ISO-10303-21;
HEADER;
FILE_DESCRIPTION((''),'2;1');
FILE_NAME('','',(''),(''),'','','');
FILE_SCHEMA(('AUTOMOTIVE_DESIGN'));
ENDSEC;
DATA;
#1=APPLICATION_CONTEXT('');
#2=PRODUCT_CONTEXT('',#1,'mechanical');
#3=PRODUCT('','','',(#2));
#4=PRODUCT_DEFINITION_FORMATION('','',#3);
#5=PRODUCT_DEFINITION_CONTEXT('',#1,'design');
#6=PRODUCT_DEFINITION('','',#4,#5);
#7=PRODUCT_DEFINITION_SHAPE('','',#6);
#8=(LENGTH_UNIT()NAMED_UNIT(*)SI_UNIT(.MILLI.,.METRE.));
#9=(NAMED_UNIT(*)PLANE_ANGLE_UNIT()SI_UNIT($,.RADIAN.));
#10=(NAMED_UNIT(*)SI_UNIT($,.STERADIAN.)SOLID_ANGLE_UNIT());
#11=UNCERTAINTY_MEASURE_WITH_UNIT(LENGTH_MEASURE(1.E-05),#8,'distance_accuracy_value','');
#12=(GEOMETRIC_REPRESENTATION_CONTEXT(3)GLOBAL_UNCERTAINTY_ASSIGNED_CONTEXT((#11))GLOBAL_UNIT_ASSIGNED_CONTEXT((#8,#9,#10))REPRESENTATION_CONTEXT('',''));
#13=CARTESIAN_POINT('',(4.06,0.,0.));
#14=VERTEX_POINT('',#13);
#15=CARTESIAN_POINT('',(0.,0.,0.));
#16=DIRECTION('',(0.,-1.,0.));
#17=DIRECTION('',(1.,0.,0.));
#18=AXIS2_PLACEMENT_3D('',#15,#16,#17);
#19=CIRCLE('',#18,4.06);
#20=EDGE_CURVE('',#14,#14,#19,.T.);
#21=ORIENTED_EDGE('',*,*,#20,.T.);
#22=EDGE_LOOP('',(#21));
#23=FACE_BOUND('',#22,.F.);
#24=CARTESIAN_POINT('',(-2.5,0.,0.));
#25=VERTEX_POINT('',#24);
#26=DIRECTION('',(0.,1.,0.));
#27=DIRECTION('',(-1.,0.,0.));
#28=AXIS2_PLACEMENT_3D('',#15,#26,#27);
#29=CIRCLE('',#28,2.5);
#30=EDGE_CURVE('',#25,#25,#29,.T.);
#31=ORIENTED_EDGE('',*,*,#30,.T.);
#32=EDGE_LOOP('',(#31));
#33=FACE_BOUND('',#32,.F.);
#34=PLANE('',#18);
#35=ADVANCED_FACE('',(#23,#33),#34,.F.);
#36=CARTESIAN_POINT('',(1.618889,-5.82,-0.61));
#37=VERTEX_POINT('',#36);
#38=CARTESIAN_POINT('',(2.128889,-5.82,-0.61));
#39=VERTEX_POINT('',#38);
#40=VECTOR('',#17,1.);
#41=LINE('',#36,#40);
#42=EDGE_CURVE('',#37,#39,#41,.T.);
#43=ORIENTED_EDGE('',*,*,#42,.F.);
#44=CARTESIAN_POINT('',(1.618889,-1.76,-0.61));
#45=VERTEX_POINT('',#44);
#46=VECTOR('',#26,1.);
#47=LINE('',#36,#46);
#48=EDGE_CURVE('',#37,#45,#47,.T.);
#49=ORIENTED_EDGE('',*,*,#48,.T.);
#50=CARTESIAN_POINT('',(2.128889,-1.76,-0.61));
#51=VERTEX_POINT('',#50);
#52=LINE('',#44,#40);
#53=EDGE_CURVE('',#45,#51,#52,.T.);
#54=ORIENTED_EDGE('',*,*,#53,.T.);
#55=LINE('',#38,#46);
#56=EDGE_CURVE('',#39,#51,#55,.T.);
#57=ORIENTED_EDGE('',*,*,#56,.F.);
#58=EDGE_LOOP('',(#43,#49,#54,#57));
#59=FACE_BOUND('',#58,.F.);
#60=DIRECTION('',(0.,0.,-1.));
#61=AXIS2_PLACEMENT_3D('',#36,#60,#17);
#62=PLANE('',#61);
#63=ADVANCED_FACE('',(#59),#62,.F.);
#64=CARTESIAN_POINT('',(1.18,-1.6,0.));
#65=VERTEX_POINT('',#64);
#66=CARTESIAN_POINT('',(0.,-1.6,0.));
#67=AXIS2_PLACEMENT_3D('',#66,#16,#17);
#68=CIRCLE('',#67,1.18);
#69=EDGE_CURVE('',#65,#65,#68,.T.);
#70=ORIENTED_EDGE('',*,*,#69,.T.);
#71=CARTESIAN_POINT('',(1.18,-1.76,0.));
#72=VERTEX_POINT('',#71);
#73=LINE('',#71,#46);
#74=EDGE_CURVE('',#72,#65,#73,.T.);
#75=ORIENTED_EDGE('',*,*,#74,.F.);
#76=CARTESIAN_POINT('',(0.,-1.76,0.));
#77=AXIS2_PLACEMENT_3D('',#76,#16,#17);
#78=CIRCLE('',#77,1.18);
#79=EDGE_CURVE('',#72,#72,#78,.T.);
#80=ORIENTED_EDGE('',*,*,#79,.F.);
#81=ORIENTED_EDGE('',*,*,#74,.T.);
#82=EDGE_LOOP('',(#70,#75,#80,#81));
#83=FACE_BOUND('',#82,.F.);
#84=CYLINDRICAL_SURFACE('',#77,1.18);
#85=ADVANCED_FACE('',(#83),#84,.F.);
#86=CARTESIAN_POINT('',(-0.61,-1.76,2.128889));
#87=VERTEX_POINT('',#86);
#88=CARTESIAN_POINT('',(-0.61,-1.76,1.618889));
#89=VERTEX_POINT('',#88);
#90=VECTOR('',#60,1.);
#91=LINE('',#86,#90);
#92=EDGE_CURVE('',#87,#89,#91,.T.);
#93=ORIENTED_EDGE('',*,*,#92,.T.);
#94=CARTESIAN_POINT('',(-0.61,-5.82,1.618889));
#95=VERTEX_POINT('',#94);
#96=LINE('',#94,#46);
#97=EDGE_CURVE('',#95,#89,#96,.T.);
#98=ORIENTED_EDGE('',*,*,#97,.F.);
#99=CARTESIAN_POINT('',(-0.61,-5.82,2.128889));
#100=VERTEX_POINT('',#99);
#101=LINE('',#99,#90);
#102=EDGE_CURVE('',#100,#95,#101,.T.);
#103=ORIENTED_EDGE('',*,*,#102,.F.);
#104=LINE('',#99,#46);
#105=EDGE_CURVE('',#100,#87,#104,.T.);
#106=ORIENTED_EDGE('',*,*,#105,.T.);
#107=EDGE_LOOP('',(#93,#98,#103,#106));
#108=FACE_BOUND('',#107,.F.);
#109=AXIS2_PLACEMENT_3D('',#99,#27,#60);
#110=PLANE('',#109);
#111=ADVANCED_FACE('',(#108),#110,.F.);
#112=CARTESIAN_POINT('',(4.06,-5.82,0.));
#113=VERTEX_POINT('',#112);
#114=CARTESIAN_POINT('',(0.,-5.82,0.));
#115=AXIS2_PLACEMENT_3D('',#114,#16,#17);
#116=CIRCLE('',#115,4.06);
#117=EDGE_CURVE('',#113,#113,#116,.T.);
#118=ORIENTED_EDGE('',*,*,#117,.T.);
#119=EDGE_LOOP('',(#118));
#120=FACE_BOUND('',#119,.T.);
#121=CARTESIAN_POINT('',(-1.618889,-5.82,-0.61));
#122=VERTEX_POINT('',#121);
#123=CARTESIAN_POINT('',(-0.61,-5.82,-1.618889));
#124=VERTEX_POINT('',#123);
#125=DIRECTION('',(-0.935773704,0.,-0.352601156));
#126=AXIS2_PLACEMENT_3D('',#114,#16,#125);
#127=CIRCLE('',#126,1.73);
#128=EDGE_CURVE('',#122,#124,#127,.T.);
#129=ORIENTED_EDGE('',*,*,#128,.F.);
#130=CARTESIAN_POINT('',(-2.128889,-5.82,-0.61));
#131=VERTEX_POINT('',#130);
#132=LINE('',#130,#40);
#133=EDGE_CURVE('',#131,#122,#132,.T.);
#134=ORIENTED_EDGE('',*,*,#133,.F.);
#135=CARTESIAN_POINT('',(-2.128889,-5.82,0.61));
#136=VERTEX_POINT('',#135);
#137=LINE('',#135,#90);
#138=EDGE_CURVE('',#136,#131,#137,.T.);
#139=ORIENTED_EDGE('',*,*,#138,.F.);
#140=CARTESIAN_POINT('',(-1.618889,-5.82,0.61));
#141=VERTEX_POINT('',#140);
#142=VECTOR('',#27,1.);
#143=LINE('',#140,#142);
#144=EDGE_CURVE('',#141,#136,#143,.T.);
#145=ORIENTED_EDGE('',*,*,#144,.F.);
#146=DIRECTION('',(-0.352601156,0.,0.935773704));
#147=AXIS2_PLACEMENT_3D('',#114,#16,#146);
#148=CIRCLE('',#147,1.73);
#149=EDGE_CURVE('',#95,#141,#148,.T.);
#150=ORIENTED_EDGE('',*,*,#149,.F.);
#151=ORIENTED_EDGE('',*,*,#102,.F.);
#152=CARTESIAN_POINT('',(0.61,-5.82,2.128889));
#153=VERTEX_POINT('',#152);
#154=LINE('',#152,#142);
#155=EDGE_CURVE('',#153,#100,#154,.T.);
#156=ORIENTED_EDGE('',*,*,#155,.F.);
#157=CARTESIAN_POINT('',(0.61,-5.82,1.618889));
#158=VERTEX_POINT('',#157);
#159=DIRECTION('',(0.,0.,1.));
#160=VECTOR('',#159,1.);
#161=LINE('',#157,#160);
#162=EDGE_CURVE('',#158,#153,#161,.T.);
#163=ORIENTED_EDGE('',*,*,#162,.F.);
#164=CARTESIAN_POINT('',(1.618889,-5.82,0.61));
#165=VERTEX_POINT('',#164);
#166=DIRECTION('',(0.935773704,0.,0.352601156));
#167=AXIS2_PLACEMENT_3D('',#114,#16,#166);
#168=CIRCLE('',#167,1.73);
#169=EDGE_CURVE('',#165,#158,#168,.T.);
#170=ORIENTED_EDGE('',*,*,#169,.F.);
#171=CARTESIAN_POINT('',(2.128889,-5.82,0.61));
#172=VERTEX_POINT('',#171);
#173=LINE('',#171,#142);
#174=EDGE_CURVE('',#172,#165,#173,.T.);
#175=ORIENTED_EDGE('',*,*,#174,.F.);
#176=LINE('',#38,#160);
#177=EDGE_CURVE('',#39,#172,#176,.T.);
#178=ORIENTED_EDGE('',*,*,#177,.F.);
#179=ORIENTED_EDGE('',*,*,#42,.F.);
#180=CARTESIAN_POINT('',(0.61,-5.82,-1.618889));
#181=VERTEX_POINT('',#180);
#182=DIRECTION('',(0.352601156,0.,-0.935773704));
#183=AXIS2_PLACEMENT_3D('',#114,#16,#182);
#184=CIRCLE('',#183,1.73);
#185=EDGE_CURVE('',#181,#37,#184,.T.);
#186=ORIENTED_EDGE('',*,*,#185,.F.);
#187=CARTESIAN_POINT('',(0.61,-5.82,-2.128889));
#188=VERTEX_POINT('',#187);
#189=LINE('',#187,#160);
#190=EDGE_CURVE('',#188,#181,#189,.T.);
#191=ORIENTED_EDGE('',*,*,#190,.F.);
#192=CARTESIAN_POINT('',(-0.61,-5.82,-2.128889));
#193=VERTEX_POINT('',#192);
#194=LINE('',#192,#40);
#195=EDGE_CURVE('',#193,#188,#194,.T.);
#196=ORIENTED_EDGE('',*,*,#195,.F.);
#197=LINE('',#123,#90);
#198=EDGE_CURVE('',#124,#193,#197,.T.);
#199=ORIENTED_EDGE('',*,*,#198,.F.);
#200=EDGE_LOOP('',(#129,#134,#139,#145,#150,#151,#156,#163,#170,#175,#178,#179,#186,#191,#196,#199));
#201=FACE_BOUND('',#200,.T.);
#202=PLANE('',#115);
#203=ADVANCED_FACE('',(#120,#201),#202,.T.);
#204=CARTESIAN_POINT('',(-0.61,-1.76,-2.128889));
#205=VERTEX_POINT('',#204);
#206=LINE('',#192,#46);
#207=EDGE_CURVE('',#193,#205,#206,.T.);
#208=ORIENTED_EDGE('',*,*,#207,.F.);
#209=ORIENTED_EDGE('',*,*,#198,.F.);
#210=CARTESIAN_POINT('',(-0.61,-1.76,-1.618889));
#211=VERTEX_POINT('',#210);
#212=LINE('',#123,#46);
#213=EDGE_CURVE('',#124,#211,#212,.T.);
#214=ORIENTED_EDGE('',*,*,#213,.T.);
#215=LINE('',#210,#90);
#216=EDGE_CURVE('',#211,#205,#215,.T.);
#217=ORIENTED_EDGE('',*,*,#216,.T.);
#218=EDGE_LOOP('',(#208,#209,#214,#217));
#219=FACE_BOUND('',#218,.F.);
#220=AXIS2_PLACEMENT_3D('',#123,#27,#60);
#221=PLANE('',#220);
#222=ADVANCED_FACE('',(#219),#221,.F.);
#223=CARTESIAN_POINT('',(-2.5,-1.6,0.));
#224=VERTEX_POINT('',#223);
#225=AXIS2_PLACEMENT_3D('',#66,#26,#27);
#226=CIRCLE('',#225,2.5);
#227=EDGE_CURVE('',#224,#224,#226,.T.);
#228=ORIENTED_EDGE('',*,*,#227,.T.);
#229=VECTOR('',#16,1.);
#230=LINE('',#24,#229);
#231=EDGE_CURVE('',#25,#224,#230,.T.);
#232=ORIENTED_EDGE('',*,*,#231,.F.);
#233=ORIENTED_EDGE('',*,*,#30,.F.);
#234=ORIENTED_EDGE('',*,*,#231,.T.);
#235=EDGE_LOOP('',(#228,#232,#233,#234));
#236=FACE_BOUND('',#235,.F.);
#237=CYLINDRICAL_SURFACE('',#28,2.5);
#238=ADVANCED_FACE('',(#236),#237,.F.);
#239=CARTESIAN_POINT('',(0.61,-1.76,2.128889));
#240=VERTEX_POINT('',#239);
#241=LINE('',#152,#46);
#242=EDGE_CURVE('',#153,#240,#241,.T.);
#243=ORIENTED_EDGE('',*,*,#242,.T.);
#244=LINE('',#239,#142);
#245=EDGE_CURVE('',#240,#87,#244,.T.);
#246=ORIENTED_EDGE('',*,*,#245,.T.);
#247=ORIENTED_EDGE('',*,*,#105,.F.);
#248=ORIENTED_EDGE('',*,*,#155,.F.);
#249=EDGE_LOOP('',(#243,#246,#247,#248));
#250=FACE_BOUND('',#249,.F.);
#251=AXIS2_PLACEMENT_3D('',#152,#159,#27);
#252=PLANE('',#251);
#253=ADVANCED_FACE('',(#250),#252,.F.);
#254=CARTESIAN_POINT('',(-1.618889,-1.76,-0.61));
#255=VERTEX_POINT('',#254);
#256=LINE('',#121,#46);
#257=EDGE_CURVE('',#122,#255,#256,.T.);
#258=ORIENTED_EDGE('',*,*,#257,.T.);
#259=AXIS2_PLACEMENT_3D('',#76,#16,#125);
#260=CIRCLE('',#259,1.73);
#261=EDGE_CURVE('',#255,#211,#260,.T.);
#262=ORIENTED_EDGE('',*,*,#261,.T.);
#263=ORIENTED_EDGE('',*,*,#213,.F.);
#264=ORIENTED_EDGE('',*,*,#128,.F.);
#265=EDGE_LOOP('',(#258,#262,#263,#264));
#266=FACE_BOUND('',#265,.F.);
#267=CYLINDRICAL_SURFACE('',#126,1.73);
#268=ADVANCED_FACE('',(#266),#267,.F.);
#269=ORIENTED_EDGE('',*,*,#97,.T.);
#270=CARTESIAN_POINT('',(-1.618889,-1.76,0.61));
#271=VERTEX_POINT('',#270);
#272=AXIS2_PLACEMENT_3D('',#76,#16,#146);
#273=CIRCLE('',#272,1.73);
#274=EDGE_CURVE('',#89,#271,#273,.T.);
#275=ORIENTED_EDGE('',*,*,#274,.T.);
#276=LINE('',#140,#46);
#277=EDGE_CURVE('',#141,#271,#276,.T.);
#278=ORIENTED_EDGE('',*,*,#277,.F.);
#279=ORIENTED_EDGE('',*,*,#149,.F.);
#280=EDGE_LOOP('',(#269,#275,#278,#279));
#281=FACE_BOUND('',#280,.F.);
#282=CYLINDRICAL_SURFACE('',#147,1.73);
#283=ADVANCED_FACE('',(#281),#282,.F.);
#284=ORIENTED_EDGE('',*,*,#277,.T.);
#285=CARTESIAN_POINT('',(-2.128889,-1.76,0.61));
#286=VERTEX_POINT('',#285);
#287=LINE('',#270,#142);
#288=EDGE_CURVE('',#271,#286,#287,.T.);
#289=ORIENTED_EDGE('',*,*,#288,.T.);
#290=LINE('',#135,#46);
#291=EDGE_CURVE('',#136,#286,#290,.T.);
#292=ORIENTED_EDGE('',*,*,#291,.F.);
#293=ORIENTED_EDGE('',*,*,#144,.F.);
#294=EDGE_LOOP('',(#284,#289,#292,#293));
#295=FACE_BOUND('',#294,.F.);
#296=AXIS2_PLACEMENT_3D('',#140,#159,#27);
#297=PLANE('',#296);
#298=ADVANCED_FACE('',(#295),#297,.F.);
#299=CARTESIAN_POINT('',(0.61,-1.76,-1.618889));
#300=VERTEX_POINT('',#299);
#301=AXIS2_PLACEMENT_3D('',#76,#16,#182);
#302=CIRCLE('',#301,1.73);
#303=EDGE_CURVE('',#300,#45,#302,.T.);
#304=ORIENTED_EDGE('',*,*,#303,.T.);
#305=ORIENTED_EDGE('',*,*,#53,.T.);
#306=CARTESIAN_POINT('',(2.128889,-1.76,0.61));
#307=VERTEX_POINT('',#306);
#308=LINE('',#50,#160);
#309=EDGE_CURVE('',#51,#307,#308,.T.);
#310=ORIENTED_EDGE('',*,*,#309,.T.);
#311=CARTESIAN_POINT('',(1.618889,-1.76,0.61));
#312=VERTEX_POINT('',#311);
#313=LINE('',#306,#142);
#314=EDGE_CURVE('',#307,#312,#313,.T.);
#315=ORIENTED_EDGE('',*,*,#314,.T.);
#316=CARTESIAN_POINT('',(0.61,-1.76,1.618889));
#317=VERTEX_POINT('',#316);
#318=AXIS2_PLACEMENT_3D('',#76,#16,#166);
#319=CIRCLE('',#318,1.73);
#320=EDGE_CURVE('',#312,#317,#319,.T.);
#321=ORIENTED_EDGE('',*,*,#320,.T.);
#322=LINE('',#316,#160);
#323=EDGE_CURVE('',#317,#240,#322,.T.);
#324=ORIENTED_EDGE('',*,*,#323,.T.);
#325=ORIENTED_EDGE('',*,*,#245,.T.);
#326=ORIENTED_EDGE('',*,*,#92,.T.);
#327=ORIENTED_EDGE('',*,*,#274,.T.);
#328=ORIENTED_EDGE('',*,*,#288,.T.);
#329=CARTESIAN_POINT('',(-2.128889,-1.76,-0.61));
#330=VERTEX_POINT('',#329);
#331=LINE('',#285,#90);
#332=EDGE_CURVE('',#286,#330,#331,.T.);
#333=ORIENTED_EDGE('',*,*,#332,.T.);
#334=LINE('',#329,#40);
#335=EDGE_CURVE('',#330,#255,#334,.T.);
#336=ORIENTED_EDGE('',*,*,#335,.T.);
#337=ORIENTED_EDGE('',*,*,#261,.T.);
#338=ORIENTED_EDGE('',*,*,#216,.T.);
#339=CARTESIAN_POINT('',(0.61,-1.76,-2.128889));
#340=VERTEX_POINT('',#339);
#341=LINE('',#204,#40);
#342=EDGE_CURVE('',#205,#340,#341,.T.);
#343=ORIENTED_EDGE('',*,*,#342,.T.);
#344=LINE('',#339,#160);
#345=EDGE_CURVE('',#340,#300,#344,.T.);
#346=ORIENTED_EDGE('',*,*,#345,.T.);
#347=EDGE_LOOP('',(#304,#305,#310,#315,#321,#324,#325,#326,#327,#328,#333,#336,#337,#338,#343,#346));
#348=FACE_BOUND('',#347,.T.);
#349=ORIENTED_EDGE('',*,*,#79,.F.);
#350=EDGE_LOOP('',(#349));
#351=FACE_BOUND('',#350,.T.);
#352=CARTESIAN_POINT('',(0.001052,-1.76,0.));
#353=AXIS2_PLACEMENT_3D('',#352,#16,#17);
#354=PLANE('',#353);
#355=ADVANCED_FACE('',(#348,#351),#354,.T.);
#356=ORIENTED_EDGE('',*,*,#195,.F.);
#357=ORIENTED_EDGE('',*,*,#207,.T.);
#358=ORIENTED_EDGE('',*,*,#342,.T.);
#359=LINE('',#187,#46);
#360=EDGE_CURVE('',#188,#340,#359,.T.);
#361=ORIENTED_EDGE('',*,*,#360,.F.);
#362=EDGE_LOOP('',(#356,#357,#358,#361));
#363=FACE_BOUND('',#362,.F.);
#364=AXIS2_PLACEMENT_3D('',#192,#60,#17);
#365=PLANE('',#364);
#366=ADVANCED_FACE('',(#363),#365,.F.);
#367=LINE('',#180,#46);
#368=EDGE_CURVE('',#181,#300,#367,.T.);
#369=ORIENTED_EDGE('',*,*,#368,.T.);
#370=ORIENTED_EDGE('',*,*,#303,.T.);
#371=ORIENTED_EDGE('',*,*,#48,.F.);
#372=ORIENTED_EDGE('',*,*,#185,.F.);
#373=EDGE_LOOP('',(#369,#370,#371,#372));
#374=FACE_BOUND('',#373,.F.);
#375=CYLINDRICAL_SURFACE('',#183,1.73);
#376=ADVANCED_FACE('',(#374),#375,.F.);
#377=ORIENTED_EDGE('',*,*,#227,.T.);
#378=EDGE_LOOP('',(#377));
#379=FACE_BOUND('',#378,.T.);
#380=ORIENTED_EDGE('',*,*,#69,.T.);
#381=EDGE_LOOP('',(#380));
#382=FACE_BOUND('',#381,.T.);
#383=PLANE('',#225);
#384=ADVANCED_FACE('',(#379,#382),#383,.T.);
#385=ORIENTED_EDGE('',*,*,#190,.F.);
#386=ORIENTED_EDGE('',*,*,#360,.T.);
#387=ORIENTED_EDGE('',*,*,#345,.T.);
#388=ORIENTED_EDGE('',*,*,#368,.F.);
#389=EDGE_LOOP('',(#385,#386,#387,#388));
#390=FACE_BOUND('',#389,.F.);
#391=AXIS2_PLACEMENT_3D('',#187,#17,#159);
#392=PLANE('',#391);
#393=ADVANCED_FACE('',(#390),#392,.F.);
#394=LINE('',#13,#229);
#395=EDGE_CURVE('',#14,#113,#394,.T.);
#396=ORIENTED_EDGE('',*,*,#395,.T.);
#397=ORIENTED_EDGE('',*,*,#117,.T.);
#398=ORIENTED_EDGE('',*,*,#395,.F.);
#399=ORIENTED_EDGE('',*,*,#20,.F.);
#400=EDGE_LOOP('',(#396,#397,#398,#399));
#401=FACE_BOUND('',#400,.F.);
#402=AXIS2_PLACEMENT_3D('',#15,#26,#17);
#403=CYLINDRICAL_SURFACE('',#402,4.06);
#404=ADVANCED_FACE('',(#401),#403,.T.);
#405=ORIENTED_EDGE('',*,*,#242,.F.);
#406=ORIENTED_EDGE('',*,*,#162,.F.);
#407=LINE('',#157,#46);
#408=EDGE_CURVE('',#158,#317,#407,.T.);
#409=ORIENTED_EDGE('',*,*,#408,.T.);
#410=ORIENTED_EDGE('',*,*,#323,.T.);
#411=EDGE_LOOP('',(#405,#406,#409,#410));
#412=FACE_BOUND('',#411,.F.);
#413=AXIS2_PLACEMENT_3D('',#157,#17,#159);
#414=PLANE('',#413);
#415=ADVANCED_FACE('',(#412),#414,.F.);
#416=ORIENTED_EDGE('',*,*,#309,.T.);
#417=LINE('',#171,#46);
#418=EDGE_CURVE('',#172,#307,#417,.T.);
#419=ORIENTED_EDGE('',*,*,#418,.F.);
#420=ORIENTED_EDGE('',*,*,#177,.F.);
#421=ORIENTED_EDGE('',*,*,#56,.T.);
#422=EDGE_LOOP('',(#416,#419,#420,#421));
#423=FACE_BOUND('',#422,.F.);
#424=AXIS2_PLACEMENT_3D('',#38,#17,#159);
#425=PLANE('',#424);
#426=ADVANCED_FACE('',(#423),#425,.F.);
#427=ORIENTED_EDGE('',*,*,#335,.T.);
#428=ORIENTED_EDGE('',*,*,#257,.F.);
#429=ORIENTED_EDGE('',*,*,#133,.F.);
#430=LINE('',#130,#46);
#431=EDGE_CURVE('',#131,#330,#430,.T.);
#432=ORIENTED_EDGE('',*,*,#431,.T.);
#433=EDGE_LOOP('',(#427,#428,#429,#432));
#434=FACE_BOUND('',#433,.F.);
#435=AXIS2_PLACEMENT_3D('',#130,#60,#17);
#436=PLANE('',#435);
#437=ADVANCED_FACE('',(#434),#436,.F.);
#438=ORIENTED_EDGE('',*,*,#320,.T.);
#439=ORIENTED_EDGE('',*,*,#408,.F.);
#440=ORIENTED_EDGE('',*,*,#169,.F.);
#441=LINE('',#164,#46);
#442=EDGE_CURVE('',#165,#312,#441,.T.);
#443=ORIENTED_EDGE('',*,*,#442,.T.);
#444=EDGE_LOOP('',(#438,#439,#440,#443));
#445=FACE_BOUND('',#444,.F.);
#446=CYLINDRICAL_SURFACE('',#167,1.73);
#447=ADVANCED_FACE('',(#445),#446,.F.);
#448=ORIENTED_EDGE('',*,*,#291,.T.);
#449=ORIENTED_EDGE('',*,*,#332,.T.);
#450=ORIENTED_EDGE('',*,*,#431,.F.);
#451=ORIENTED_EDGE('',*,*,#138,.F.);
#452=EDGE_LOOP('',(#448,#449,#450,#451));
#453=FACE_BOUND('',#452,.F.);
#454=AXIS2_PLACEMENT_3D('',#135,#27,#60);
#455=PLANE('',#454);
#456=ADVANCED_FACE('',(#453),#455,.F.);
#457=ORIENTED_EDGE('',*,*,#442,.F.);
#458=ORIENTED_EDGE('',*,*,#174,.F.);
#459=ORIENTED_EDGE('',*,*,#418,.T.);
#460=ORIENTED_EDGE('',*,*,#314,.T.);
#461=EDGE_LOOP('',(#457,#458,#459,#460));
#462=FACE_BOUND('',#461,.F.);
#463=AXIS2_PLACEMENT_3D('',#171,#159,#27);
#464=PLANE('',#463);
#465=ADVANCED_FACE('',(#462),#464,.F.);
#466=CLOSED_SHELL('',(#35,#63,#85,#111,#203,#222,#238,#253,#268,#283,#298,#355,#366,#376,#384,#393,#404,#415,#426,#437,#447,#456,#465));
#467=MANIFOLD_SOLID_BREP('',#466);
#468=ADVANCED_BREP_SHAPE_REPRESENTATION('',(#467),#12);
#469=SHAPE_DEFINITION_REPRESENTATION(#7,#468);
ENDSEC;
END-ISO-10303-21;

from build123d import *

# Parameters (mm, degrees)
F0_R     = 4.06
F1_DEPTH = 5.82
F3_DEPTH = 4.06
F4_R     = 1.18
F5_DEPTH = 25
F6_R     = 2.5
F6_R_2   = 1.18
F7_DEPTH = 1.6


# Not quite as in the source:
# - a feature names something its author has since deleted; it is built from what else it names


with BuildPart() as f1:
    # F0 (on Front) → F1 (new body)
    with BuildSketch(Plane.XZ):
        Circle(F0_R)
    extrude(amount=F1_DEPTH)

    # F2 (on face) → F3 (cut)
    with BuildSketch(Plane.XZ.offset(5.82)):
        with BuildLine():
            ThreePointArc((1.6188885076, -0.61), (1.7019954639, -0.3100184526), (1.73, 0))
            ThreePointArc((1.73, 0), (1.7019954639, 0.3100184526), (1.6188885076, 0.61))
            ThreePointArc((1.6188885076, 0.61), (1.2232947315, 1.2232947315), (0.61, 1.6188885076))
            ThreePointArc((0.61, 1.6188885076), (0, 1.73), (-0.61, 1.6188885076))
            ThreePointArc((-0.61, 1.6188885076), (-1.2232947315, 1.2232947315), (-1.6188885076, 0.61))
            ThreePointArc((-1.6188885076, 0.61), (-1.73, 0), (-1.6188885076, -0.61))
            ThreePointArc((-1.6188885076, -0.61), (-1.2232947315, -1.2232947315), (-0.61, -1.6188885076))
            ThreePointArc((-0.61, -1.6188885076), (0, -1.73), (0.61, -1.6188885076))
            ThreePointArc((0.61, -1.6188885076), (1.2232947315, -1.2232947315), (1.6188885076, -0.61))
        make_face()
        with BuildLine():
            ThreePointArc((1.6188885076, 0.61), (1.7019954639, 0.3100184526), (1.73, 0))
            ThreePointArc((1.73, 0), (1.7019954639, -0.3100184526), (1.6188885076, -0.61))
            Line((1.6188885076, -0.61), (2.1288885076, -0.61))
            Line((2.1288885076, -0.61), (2.1288885076, 0.61))
            Line((2.1288885076, 0.61), (1.6188885076, 0.61))
        make_face()
        with BuildLine():
            ThreePointArc((-0.61, 1.6188885076), (0, 1.73), (0.61, 1.6188885076))
            Line((0.61, 1.6188885076), (0.61, 2.1288885076))
            Line((0.61, 2.1288885076), (-0.61, 2.1288885076))
            Line((-0.61, 2.1288885076), (-0.61, 1.6188885076))
        make_face()
        with BuildLine():
            Line((0.61, -2.1288885076), (0.61, -1.6188885076))
            ThreePointArc((0.61, -1.6188885076), (0, -1.73), (-0.61, -1.6188885076))
            Line((-0.61, -1.6188885076), (-0.61, -2.1288885076))
            Line((-0.61, -2.1288885076), (0.61, -2.1288885076))
        make_face()
        with BuildLine():
            ThreePointArc((-1.6188885076, -0.61), (-1.73, 0), (-1.6188885076, 0.61))
            Line((-1.6188885076, 0.61), (-2.1288885076, 0.61))
            Line((-2.1288885076, 0.61), (-2.1288885076, -0.61))
            Line((-2.1288885076, -0.61), (-1.6188885076, -0.61))
        make_face()
    extrude(amount=-F3_DEPTH, mode=Mode.SUBTRACT)

    # F4 (on face) → F5 (cut)
    with BuildSketch(Plane.XZ.offset(1.76)):
        Circle(F4_R)
    extrude(amount=-F5_DEPTH, mode=Mode.SUBTRACT)

    # F6 (on face) → F7 (cut)
    with BuildSketch(Plane(origin=(0, 0, 0), x_dir=(-1, 0, 0), z_dir=(0, 1, 0))):
        Circle(F6_R)
        Circle(F6_R_2, mode=Mode.SUBTRACT)
    extrude(amount=-F7_DEPTH, mode=Mode.SUBTRACT)


solid = f1.part
